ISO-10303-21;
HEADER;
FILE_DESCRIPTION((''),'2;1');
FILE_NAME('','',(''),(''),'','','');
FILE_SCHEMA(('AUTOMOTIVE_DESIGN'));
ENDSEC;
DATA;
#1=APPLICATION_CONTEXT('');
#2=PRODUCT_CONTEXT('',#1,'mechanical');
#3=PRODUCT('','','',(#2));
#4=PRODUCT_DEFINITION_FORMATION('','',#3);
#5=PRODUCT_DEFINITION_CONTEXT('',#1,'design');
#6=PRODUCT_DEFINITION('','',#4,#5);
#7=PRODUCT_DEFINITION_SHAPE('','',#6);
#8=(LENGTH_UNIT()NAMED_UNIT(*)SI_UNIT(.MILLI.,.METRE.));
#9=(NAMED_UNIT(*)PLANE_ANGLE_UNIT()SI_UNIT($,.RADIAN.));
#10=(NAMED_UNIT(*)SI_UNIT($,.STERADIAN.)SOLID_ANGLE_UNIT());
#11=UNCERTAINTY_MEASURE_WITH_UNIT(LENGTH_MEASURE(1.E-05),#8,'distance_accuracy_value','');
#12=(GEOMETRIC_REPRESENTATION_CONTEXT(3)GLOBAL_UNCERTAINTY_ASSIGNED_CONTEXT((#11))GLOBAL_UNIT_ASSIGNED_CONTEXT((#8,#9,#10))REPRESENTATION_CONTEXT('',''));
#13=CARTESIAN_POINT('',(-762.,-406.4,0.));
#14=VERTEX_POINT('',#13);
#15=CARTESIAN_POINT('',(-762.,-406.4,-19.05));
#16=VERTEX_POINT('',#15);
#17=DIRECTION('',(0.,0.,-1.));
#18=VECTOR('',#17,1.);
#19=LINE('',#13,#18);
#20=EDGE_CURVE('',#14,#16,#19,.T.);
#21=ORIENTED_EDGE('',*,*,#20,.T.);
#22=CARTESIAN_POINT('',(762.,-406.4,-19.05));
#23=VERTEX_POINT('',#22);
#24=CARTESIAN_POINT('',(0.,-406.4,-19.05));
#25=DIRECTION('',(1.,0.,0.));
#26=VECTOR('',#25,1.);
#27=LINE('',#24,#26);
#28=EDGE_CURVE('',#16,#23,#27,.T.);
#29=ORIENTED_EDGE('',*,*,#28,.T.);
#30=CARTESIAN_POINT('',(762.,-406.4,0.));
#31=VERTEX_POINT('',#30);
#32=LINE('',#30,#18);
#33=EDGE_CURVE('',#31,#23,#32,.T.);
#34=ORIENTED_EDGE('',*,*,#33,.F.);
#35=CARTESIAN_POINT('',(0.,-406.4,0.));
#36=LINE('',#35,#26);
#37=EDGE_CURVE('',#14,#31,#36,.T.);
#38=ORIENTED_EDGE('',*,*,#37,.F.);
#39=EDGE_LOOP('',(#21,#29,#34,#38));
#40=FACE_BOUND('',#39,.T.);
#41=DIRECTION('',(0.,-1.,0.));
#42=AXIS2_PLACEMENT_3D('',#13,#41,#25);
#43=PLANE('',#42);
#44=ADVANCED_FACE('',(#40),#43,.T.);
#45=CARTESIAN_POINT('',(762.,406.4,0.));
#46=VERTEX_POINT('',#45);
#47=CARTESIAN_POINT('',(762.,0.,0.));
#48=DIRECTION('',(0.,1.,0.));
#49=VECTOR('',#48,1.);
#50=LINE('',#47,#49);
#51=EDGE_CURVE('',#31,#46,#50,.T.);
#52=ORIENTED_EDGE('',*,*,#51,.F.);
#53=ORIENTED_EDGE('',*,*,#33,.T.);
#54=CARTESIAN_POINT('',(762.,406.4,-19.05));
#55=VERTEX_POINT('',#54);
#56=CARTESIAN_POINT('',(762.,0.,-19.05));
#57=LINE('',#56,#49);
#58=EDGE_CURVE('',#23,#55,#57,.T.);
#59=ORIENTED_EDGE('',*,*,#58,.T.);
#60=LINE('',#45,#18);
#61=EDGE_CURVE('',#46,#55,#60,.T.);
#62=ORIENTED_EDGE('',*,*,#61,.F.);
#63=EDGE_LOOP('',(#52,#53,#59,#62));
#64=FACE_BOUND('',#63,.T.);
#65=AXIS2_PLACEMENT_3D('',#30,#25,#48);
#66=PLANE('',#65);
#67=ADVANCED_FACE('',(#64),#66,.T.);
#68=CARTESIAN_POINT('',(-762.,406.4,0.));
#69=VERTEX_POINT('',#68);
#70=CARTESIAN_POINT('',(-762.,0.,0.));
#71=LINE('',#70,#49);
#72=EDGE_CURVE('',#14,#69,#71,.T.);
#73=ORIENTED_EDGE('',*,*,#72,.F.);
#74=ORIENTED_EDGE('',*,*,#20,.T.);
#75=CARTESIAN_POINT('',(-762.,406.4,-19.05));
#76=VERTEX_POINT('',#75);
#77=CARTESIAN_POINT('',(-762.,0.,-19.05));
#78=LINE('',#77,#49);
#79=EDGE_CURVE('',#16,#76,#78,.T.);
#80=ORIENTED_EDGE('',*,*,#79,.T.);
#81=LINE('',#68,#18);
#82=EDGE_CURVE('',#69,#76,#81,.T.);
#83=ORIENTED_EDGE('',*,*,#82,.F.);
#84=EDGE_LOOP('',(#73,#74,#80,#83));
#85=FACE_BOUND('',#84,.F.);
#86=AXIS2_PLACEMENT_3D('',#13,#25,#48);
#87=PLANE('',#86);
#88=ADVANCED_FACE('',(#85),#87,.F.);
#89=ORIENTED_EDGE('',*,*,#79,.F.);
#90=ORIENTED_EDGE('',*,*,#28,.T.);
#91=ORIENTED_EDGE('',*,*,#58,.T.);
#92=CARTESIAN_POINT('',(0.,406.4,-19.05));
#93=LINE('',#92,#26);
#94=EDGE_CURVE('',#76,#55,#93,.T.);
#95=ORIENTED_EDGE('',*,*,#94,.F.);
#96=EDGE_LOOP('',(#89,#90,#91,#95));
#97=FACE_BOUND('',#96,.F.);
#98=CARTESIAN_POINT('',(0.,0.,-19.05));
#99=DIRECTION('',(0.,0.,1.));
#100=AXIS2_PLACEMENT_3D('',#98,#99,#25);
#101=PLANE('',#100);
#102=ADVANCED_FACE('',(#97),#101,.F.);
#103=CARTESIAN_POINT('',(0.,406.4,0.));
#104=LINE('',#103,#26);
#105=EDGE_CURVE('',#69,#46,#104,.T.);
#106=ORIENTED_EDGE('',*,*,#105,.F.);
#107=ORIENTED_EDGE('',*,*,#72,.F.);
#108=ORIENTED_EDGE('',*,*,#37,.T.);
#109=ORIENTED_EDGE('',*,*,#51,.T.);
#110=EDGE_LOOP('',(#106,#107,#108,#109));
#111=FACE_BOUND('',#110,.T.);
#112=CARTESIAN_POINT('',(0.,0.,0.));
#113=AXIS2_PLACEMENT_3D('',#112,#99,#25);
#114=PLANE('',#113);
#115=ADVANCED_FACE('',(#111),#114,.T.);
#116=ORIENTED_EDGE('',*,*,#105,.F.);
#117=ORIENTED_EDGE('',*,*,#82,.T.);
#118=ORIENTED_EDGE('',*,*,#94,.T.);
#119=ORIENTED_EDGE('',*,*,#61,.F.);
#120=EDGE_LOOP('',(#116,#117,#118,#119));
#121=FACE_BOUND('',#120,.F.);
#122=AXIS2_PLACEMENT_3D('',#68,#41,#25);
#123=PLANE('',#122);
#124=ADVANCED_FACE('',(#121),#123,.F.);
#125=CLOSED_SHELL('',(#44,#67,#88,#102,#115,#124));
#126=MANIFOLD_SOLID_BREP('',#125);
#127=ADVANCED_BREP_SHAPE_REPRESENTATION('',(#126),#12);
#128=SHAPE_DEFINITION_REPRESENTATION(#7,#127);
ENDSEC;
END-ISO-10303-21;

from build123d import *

# Parameters (mm, degrees)
F0_W     = 1524
F0_H     = 812.8
F0_W_2   = 1193.8
F0_H_2   = 609.6
F1_DEPTH = 19.05


# Not quite as in the source:
# - a feature names something its author has since deleted; it is built from what else it names


with BuildPart() as f1:
    # F0 (on Top) → F1 (new body)
    with BuildSketch(Plane.XY):
        Rectangle(F0_W, F0_H)
        with Locations((0, -50.8)):
            Rectangle(F0_W_2, F0_H_2, mode=Mode.SUBTRACT)
        with Locations((0, -50.8)):
            Rectangle(F0_W_2, F0_H_2)
    extrude(amount=-F1_DEPTH)


solid = f1.part
